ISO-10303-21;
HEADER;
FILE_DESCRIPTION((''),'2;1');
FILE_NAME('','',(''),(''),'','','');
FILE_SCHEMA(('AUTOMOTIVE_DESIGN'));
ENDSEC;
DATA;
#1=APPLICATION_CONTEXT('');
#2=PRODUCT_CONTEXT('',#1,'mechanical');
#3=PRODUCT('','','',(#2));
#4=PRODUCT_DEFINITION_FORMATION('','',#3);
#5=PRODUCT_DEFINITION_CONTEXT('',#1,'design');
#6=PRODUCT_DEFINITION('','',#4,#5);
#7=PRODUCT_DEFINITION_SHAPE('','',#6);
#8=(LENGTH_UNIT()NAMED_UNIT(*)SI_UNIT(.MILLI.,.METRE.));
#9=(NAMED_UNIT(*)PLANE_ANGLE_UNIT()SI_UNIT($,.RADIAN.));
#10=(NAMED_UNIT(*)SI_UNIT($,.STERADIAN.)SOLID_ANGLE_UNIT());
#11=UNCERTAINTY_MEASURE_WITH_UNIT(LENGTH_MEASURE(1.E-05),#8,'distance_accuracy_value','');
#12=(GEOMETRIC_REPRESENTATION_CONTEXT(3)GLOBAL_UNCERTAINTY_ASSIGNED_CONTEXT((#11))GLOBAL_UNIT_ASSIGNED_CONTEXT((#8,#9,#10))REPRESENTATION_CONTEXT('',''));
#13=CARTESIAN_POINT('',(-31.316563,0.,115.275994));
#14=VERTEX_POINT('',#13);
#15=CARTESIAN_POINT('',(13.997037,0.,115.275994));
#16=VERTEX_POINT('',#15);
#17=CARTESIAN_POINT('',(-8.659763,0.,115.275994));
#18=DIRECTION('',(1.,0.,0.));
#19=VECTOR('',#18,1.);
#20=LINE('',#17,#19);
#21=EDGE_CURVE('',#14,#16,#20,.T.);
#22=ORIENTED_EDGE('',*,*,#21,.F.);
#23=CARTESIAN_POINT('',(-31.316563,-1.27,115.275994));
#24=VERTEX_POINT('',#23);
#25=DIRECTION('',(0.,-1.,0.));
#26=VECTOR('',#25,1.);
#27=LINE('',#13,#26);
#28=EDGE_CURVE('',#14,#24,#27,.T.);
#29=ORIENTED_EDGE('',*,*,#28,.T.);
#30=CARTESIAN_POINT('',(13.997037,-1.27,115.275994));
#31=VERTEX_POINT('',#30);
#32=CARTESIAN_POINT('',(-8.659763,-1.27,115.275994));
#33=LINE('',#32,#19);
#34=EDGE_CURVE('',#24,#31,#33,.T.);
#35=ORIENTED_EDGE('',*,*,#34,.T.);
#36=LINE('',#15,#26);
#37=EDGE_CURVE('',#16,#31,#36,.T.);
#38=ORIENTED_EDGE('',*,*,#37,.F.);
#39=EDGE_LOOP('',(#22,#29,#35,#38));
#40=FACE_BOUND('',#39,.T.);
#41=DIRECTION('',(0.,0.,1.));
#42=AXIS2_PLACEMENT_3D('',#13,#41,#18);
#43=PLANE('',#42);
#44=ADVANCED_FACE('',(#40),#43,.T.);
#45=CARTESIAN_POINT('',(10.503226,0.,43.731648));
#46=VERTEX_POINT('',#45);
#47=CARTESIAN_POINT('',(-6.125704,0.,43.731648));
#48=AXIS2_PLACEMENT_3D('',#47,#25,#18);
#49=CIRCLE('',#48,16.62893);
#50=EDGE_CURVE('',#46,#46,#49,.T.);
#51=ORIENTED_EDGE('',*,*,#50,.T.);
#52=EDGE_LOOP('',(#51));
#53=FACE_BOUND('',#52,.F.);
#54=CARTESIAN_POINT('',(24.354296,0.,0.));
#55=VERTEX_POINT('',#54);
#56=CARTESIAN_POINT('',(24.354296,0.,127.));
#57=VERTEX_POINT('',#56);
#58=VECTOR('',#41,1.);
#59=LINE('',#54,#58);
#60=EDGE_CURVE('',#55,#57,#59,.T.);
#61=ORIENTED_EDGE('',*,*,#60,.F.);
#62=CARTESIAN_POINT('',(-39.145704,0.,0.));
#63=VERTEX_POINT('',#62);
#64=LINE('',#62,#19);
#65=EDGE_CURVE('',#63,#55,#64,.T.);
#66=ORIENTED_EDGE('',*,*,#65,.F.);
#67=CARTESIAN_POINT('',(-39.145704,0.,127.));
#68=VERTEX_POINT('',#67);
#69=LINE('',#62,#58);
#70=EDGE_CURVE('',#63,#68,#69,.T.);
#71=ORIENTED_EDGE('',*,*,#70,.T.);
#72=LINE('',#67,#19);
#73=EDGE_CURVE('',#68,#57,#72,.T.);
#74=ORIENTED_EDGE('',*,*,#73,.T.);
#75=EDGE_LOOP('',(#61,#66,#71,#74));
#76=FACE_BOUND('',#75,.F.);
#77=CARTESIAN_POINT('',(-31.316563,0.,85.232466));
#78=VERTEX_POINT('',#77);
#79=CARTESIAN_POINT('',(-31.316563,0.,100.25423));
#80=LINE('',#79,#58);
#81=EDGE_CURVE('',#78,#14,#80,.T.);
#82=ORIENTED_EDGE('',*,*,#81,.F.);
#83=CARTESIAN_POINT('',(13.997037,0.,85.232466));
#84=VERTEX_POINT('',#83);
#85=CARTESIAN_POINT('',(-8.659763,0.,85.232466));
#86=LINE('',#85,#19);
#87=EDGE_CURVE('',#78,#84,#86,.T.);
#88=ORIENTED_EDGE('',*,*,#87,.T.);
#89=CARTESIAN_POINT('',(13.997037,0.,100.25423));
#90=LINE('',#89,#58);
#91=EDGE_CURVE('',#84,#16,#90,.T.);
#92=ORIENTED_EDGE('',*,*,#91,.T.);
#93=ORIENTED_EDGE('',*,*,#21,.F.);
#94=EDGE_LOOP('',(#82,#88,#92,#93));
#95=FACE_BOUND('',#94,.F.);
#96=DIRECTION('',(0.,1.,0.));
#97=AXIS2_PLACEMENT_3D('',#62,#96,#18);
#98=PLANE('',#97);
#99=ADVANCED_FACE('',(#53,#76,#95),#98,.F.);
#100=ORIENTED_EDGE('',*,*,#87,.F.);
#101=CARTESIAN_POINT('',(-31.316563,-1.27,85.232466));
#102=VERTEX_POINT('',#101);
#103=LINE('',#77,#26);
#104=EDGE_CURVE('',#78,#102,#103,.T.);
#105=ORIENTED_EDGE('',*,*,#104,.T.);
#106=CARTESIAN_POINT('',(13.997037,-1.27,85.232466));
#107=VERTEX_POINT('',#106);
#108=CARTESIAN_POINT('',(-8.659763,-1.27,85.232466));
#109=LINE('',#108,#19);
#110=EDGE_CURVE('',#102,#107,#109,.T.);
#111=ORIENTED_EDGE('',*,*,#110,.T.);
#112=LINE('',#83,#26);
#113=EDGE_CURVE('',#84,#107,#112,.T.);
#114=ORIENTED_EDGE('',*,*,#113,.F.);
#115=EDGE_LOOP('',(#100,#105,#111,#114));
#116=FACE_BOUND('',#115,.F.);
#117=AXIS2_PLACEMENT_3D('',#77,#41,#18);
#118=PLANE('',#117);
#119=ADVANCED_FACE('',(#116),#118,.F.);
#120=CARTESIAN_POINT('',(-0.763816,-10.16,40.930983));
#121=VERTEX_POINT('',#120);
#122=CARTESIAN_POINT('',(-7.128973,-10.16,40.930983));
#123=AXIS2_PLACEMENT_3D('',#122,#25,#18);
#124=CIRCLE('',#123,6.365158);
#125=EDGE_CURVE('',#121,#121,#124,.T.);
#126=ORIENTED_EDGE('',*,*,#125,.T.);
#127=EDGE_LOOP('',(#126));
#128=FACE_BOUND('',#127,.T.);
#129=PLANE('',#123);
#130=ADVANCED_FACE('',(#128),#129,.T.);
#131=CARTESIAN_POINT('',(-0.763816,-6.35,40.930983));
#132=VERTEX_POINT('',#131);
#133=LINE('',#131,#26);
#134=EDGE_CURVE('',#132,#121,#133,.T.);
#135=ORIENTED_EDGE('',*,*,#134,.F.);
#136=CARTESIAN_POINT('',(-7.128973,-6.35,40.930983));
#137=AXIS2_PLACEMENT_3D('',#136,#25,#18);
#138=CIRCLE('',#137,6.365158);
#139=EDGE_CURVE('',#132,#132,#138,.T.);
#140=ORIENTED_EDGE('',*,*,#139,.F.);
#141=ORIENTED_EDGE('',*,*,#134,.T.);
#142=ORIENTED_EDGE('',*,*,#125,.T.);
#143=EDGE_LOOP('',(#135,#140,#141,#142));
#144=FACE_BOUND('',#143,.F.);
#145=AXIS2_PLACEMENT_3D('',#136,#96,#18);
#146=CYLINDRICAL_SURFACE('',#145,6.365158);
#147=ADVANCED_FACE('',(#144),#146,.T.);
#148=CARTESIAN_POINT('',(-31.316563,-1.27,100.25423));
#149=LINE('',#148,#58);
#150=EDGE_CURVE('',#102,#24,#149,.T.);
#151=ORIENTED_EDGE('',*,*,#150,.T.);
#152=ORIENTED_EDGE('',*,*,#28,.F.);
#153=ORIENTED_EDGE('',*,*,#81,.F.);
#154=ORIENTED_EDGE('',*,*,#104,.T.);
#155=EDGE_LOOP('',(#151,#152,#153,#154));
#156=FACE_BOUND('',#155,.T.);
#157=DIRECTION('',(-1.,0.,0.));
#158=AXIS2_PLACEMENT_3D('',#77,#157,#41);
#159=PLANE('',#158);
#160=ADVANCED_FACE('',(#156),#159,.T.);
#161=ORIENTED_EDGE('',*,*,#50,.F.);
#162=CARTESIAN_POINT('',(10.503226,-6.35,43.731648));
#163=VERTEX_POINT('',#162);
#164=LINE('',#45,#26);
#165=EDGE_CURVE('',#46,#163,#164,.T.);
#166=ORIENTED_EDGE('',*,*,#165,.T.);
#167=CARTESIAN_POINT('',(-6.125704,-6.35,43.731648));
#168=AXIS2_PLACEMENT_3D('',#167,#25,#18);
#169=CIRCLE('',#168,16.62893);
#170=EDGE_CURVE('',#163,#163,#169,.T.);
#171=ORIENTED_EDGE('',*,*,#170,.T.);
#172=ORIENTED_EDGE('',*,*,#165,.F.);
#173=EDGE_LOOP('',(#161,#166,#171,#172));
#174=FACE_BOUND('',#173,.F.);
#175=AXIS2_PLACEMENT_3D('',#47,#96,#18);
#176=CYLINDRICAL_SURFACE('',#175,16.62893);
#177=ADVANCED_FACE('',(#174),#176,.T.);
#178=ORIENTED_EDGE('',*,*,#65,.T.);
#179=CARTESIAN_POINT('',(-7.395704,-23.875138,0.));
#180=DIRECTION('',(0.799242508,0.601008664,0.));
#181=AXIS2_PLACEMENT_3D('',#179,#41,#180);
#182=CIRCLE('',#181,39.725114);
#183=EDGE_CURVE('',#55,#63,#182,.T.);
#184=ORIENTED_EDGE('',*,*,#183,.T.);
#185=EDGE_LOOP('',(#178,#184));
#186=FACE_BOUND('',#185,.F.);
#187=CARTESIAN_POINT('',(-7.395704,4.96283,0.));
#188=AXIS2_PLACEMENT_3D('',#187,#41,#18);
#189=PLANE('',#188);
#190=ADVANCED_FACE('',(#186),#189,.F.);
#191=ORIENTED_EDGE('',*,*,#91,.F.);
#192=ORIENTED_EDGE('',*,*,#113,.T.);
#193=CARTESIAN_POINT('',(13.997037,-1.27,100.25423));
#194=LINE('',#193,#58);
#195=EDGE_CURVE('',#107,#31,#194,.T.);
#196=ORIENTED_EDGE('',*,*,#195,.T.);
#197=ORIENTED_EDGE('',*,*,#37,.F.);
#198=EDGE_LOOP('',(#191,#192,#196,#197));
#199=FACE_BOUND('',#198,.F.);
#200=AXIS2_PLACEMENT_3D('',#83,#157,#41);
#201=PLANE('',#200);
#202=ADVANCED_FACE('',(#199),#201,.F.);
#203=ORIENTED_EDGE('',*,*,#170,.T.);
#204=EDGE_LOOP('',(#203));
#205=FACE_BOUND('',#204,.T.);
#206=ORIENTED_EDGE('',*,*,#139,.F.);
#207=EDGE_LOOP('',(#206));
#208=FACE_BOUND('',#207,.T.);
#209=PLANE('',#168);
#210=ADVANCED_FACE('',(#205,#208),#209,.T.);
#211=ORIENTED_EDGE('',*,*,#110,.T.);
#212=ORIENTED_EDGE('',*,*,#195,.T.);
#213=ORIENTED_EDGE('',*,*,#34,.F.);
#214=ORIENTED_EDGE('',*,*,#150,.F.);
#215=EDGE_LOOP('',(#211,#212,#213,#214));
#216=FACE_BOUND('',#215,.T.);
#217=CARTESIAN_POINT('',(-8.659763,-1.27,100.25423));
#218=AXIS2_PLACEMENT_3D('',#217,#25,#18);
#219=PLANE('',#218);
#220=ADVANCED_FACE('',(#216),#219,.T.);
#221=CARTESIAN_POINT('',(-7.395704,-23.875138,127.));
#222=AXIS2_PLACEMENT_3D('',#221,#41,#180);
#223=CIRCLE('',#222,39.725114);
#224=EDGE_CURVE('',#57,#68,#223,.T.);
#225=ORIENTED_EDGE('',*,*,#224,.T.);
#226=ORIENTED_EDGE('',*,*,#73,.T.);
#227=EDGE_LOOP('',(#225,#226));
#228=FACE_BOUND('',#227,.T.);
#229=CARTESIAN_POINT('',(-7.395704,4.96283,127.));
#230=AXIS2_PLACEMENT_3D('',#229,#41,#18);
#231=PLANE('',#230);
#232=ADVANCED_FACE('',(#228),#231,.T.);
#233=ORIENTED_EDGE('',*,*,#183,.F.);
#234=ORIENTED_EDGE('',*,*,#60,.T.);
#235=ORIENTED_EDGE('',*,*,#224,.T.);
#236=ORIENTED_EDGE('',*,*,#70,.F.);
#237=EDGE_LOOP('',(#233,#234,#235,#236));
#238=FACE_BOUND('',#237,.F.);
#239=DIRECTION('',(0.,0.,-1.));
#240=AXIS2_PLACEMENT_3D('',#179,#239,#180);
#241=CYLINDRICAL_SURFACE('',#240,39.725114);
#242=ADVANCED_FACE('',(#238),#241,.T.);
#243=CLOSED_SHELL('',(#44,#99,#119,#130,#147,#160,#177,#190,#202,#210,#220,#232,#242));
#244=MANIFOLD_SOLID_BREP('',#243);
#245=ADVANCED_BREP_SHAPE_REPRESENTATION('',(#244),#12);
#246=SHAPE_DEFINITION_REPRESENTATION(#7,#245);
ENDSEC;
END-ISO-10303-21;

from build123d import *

# Parameters (mm, degrees)
F1_DEPTH  = 127
F2_R      = 16.6289302691
F3_DEPTH  = 6.35
F4_W      = 2.8006685898
F4_H      = 13.494130224
F4_W_2    = 2.8006681241
F4_H_2    = 14.0033438802
F5_DEPTH  = 2.54
F6_R      = 6.3651576638
F7_DEPTH  = 3.81
F10_W     = 45.3136
F10_H     = 30.0435274839
F11_DEPTH = 1.27


# Not quite as in the source:
# - a feature of the source that left no trace in its solid (it failed there, or was rolled back) is left out


with BuildPart() as f1:
    # F0 (on Top) → F1 (new body)
    with BuildSketch(Plane.XY):
        with BuildLine():
            ThreePointArc((24.3542956412, 0), (-7.3957043588, 15.8499764569), (-39.1457043588, 0))
            Line((-39.1457043588, 0), (24.3542956412, 0))
        make_face()
    extrude(amount=F1_DEPTH)

    # F2 (on face) → F3 (join)
    with BuildSketch(Plane.XZ):
        with Locations((-6.1257043588, 43.7316484749)):
            Circle(F2_R)
    extrude(amount=F3_DEPTH)

    # F4 (on face) → F5 (join)
    with BuildSketch(Plane.XZ.offset(6.35)):
        with Locations((-15.4036753811, 41.3128901273)):
            Rectangle(F4_W, F4_H)
        with Locations((1.4003340621, 41.0582832992)):
            Rectangle(F4_W_2, F4_H_2)
    extrude(amount=-F5_DEPTH)

    # F6 (on face) → F7 (join)
    with BuildSketch(Plane.XZ.offset(6.35)):
        with Locations((-7.1289734915, 40.9309826791)):
            Circle(F6_R)
    extrude(amount=F7_DEPTH)

    # F10 (on face) → F11 (join)
    with BuildSketch(Plane.XZ):
        with Locations((-8.6597625557, 100.2542302012)):
            Rectangle(F10_W, F10_H)
    extrude(amount=F11_DEPTH)


solid = f1.part
